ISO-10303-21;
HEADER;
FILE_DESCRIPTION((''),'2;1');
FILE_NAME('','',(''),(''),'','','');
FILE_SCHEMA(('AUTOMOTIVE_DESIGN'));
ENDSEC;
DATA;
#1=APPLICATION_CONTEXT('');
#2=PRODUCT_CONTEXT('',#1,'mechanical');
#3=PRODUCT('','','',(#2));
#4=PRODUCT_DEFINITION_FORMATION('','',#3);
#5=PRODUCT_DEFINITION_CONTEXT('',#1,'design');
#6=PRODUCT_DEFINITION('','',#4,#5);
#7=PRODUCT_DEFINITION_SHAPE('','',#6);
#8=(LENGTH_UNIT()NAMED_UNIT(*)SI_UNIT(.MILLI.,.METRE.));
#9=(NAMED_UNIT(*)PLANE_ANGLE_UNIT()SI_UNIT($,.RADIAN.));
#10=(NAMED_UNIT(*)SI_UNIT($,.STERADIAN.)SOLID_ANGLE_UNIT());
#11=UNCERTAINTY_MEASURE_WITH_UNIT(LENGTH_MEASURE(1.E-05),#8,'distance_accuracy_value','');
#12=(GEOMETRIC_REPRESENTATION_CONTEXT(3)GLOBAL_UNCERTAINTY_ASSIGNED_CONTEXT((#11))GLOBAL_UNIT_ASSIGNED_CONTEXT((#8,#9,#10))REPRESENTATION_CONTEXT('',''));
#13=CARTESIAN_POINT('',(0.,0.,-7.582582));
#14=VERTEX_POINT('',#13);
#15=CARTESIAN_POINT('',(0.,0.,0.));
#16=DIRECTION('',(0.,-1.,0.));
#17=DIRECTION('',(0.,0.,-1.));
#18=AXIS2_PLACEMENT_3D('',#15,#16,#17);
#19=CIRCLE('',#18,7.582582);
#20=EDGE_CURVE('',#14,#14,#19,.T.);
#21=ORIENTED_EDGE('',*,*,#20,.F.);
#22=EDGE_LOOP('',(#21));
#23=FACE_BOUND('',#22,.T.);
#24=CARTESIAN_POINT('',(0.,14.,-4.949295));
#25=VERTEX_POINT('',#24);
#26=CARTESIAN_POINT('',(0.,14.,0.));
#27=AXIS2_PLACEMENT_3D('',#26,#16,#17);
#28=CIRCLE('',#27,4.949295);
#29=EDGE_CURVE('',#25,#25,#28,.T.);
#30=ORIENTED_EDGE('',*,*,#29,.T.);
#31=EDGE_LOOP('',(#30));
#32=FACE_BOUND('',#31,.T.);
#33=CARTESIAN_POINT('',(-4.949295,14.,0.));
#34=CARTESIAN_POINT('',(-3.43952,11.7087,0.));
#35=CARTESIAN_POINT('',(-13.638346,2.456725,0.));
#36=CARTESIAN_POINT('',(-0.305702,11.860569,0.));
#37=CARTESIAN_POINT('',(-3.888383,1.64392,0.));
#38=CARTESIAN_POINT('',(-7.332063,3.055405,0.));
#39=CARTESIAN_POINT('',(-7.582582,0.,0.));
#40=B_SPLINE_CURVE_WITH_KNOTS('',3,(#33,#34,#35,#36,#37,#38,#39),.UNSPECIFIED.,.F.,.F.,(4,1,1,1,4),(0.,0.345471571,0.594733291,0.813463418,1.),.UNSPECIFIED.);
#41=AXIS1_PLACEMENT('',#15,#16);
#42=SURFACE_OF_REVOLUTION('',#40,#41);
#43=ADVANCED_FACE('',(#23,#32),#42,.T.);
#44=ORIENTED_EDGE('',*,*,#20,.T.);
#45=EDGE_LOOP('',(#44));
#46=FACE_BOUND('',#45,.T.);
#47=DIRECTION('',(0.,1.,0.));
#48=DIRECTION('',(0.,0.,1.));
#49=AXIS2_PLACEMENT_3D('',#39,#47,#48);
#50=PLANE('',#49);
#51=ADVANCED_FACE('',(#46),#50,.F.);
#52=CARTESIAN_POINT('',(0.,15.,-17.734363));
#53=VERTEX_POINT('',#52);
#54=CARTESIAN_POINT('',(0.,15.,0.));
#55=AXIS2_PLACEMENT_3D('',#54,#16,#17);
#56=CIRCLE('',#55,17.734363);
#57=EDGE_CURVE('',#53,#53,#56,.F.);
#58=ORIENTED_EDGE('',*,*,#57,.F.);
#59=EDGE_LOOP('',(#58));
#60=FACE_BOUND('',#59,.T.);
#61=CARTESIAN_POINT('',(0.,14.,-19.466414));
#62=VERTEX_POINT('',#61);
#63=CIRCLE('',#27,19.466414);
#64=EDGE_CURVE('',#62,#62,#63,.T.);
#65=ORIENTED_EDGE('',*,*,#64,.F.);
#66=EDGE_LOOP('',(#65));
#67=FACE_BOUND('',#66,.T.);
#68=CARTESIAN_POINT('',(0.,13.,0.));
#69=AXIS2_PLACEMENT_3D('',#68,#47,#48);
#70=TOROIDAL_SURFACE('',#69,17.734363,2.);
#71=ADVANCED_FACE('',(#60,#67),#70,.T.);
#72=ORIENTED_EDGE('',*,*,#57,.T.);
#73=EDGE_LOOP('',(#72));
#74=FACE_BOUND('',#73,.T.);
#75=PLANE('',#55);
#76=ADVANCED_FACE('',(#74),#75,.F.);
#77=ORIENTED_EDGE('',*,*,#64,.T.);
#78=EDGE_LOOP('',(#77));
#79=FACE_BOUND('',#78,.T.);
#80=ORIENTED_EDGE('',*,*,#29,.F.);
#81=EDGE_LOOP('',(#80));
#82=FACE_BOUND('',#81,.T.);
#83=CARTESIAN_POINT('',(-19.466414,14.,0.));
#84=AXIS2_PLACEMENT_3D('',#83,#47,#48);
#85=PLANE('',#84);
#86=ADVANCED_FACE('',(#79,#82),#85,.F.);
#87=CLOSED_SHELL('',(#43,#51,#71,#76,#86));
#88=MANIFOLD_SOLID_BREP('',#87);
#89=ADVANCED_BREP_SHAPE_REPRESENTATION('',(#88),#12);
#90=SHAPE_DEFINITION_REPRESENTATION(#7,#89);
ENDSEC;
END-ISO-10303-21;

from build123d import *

# Parameters (mm, degrees)
FILLET_1_R = 2


with BuildPart() as part:
    # 草圖2 → 旋轉1 (revolve)
    with BuildSketch(Plane.XY, mode=Mode.PRIVATE) as revolve_1_sk:
        with BuildLine():
            Line((0, 15), (-20, 15))
            Line((-20, 15), (-19.466413941, 14))
            Line((-19.466413941, 14), (-4.949295137, 14))
            add(Edge.make_bspline(
                [(-4.949295137, 14), (-3.439519694, 11.708700289), (-13.638346404, 2.456724966), (-0.305701545, 11.860569474), (-3.888383363, 1.643920034), (-7.332063334, 3.055405181), (-7.582582315, 0)],
                knots=[0, 0, 0, 0, 0.345471571, 0.594733291, 0.813463418, 1, 1, 1, 1], degree=3))
            Line((-7.582582315, 0), (0, 0))
            Line((0, 0), (0, 15))
        make_face()
    revolve(revolve_1_sk.sketch.rotate(Axis((0, 0, 0), (0, 1, 0)), 270), axis=Axis((0, 0, 0), (0, 1, 0)))

    # 圓角1
    # the kernel refuses this fillet: 2 mm, written as the material it takes off along each edge
    with BuildSketch(Plane(origin=(0, 15, 0), x_dir=(0, 0, -1), z_dir=(1, 0, 0))) as fillet_1_piece_1:
        with BuildLine():
            CenterArc((17.734363134, -2), FILLET_1_R, 30, 60)
            Line((19.466413941, -1), (19.501054957, -0.98))
            ThreePointArc((19.501054957, -0.98), (19.768497384, -0.518830473), (20.035290414, -0.018830473))
            Line((20.035290414, -0.018830473), (20, 0.04))
            Line((20, 0.04), (17.734363134, 0.04))
            Line((17.734363134, 0.04), (17.734363134, 0))
        make_face()
    revolve(axis=Axis((0, 15, 0), (0, 1, 0)), mode=Mode.SUBTRACT)


solid = part.part
